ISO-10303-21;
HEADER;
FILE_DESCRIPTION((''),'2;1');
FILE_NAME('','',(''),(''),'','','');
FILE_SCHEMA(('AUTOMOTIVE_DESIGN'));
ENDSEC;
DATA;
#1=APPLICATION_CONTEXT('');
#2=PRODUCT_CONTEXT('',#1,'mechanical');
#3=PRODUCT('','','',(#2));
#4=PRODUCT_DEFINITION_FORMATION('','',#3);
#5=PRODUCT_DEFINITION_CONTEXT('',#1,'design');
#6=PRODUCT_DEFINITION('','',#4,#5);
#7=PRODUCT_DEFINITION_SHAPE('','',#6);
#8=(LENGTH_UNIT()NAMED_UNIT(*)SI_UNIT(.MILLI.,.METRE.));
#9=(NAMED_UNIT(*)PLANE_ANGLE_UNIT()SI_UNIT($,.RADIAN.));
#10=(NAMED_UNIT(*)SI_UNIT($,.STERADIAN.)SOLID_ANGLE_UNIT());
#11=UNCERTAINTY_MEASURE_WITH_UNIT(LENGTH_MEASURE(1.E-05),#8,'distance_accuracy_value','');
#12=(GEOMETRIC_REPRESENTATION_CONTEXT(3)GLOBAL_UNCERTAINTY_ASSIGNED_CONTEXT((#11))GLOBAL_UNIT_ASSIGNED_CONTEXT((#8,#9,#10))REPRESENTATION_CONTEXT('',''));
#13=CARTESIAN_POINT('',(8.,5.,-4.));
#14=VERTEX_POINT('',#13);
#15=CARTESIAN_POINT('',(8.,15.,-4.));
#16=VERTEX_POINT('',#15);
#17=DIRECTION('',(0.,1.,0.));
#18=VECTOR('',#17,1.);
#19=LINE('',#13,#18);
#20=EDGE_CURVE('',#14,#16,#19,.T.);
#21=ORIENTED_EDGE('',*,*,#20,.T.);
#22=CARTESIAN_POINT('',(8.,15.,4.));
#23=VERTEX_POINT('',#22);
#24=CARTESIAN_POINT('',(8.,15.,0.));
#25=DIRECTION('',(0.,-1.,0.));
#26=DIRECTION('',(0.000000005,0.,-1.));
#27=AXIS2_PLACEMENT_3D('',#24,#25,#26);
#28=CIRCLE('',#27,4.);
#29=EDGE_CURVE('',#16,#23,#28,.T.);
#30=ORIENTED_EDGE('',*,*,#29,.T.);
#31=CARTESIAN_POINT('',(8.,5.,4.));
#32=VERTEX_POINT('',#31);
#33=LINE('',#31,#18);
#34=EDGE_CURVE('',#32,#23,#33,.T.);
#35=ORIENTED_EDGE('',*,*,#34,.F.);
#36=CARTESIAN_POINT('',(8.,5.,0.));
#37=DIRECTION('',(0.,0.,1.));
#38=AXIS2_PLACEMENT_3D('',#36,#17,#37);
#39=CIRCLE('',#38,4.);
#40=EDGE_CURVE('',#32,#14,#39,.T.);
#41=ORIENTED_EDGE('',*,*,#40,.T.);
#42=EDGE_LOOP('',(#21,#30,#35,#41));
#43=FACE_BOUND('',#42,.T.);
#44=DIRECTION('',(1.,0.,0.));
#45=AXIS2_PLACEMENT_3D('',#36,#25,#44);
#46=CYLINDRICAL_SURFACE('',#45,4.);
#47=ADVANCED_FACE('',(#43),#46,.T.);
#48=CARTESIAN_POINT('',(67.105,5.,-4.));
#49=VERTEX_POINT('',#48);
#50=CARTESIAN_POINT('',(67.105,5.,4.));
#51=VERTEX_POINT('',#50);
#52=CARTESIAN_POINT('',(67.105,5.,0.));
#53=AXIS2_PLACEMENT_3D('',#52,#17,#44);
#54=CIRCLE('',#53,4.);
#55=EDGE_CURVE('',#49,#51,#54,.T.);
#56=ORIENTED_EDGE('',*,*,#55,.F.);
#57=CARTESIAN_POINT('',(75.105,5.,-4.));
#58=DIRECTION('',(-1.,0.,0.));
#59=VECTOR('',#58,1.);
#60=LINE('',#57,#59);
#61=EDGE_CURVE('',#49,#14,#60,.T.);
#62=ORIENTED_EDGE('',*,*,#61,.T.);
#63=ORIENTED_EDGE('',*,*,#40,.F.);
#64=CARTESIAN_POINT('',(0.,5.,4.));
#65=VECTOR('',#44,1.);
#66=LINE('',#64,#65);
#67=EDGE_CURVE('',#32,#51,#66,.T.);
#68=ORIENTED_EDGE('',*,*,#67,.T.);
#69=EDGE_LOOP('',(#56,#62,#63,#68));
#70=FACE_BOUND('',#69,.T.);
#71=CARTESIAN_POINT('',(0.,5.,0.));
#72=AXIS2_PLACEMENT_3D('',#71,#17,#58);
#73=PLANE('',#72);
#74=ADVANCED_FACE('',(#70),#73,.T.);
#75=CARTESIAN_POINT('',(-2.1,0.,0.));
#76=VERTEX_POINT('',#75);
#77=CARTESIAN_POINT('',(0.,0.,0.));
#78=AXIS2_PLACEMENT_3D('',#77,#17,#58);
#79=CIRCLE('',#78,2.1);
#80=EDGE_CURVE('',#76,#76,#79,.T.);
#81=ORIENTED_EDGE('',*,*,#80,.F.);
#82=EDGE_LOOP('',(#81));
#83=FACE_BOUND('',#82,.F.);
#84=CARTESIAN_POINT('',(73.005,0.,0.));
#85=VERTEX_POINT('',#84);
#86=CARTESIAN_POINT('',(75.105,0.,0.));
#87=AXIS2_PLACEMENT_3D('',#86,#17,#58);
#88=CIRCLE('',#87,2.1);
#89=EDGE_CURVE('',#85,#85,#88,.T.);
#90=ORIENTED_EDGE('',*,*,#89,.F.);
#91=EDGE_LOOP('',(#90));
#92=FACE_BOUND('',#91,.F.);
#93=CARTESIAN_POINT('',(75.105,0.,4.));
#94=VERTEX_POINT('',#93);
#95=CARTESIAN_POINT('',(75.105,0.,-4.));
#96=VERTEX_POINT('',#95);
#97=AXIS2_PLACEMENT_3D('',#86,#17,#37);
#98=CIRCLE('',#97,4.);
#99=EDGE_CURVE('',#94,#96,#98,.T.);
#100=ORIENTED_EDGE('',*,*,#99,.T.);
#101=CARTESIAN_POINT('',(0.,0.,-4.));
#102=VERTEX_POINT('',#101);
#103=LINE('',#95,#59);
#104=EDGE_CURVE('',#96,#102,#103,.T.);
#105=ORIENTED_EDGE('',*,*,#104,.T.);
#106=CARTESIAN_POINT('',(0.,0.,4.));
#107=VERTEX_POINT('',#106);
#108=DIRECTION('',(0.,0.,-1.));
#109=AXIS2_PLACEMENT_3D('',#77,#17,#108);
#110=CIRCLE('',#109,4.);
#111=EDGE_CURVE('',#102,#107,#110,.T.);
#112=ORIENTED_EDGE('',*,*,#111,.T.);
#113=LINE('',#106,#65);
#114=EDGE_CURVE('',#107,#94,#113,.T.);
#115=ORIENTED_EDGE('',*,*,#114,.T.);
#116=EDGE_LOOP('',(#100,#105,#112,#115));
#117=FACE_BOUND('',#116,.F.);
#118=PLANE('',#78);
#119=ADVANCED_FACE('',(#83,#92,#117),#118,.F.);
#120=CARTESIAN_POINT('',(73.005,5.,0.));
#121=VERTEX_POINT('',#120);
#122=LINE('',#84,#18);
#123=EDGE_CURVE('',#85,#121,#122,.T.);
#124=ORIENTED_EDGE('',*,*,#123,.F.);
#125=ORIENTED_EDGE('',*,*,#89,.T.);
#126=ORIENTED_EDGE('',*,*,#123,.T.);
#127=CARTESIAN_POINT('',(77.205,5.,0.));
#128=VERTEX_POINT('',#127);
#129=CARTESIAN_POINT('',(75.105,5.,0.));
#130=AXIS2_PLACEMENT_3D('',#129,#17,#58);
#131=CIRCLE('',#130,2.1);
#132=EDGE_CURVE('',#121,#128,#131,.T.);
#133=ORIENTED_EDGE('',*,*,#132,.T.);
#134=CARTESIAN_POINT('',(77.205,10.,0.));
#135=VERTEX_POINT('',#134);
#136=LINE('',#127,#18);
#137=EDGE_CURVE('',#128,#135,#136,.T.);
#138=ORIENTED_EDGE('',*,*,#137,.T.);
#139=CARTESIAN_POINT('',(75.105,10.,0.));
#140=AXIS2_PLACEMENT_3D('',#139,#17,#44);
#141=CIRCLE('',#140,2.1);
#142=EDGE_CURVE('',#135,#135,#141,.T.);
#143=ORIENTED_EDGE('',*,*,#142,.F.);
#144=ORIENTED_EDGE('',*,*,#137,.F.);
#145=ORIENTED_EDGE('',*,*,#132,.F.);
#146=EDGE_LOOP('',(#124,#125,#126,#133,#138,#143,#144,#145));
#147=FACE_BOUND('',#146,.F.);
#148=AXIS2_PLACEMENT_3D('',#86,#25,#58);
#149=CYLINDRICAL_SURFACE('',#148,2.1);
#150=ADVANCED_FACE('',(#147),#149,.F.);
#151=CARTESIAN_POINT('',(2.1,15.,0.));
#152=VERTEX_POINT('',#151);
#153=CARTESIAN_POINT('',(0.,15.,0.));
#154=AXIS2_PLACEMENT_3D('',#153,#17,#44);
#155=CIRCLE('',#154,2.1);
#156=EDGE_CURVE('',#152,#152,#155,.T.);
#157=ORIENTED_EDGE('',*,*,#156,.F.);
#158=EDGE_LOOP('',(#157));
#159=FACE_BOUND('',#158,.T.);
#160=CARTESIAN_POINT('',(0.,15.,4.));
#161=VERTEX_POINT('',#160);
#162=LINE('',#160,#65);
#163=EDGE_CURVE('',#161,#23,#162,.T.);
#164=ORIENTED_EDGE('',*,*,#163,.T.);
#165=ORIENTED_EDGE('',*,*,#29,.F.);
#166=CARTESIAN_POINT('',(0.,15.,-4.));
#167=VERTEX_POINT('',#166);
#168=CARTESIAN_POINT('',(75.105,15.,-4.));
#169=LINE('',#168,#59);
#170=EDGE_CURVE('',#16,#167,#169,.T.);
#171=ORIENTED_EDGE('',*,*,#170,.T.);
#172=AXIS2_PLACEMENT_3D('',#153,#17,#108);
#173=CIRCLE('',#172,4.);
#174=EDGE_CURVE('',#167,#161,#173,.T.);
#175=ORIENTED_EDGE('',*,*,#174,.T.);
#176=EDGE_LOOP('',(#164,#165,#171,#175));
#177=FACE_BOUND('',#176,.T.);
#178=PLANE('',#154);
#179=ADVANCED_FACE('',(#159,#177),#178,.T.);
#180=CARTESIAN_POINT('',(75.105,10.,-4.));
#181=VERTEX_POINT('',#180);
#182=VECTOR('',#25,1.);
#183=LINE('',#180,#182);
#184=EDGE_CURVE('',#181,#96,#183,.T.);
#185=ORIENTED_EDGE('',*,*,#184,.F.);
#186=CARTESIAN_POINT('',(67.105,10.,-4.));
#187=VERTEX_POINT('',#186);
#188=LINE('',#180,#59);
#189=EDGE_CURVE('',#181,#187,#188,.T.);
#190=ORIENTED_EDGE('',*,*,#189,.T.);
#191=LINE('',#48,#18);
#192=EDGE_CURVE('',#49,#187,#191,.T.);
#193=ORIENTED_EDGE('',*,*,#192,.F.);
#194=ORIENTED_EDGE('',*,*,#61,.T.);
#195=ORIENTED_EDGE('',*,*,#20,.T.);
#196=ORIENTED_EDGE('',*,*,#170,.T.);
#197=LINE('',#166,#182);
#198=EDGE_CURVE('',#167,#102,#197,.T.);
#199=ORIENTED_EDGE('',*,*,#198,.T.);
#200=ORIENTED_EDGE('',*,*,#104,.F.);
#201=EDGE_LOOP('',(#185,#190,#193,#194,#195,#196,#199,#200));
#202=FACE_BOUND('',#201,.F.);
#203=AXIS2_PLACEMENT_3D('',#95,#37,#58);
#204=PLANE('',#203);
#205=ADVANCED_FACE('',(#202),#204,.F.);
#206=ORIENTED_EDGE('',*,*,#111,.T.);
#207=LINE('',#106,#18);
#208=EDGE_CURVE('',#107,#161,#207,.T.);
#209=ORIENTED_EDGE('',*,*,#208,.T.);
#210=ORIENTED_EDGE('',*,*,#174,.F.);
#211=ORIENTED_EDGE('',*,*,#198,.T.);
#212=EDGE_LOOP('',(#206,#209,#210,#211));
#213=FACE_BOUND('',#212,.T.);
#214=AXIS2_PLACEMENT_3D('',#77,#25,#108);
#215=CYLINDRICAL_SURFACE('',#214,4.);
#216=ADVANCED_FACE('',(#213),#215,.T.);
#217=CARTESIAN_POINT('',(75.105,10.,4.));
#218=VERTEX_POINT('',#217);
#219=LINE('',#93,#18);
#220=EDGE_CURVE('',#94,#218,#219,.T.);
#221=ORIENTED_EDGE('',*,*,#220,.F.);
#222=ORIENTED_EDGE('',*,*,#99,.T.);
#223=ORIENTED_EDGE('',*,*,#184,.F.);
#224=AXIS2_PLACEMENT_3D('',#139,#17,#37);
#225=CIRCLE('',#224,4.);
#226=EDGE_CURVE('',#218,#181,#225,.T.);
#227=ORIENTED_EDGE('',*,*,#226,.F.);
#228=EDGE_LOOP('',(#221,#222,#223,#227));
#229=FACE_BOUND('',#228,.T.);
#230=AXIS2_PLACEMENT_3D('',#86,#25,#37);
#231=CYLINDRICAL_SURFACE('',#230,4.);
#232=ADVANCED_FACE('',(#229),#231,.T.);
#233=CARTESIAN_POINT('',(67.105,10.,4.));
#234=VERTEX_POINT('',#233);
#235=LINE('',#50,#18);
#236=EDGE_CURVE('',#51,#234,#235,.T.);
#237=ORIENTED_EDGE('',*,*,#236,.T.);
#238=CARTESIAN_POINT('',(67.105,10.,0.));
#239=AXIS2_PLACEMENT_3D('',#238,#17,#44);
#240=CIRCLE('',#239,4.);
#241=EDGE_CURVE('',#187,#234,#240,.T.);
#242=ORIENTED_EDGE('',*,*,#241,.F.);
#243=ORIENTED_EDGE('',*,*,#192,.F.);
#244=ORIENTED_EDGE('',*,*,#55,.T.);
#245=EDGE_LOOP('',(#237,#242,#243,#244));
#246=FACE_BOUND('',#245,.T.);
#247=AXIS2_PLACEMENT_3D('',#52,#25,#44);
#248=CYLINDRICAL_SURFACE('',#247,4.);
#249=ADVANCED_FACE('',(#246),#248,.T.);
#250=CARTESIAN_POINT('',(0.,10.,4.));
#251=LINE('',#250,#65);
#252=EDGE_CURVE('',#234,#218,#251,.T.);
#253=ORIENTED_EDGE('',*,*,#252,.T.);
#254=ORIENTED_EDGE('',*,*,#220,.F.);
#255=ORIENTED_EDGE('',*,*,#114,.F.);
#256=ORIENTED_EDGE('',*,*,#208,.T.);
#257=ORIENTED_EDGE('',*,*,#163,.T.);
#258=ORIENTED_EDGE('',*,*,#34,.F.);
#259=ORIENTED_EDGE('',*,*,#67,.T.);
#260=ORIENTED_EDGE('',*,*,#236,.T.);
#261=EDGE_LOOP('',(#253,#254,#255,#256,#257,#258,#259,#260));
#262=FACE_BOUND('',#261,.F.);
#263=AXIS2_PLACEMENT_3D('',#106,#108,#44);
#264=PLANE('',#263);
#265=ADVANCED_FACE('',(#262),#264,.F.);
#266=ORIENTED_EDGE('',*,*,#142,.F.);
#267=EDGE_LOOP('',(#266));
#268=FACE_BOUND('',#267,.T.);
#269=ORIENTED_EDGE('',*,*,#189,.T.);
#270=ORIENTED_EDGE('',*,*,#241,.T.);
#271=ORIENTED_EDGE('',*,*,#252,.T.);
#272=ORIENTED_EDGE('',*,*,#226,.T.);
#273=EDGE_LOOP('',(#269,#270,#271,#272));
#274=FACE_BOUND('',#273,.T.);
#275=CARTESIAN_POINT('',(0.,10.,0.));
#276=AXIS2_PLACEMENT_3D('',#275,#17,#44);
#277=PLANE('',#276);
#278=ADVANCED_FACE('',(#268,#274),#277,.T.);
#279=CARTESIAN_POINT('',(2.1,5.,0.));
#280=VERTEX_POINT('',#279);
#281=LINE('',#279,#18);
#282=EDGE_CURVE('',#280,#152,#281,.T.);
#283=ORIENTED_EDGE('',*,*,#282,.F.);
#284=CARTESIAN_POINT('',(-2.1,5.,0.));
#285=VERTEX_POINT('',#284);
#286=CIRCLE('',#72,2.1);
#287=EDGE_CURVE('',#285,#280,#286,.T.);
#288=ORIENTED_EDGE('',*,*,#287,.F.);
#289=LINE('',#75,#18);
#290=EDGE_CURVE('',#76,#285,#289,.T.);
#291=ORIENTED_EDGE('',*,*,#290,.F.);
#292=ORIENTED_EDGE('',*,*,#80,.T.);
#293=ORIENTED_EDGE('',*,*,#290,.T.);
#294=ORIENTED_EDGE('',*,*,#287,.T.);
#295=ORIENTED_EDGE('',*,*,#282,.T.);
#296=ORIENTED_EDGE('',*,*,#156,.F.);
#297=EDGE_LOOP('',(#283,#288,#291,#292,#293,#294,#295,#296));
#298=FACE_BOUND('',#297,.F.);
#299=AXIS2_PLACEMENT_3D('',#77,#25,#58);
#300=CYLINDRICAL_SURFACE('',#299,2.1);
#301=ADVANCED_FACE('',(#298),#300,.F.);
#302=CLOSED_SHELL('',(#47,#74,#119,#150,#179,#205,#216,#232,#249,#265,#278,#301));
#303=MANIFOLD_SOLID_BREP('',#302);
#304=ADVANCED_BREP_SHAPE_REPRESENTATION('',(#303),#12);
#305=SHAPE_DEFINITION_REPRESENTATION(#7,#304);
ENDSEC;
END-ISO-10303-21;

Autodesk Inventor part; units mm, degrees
ref_plane "YZ Plane" through (0, 0, 0) normal (1, 0, 0) x (0, 1, 0)
ref_plane "XZ Plane" through (0, 0, 0) normal (0, 1, 0) x (-1, 0, 0)
ref_plane "XY Plane" through (0, 0, 0) normal (0, 0, 1) x (1, 0, 0)
sketch "Sketch1" plane through (0, 0, 0) normal (0, 1, 0) x (-1, 0, 0)
  line L0 (0, 0) -> (-75.105, 0) construction
  line L1 (0, 4) -> (-75.105, 4)
  line L2 (-75.105, -4) -> (0, -4)
  arc A0 (0, -4) -> (0, 4) centre (0, 0) ccw
  arc A1 (-75.105, 4) -> (-75.105, -4) centre (-75.105, 0) ccw
  circle A2 centre (0, 0) radius 2.1
  circle A3 centre (-75.105, 0) radius 2.1
  point P0 (-37.5525, 0)
  dimension "d0" = 75.105
  dimension "d1" = 8
  dimension "d2" = 4.2
  dimension "d10" = 4.2
extrude "Extrusion1" add sketch "Sketch1" along normal blind 5
sketch "Sketch4" plane through (0, 5, 0) normal (0, 1, 0) x (1, 0, 0)
  circle A0 centre (8, 0) radius 4
  circle A1 centre (67.105, 0) radius 4
  arc A2 (75.105, -4) -> (75.105, 4) centre (75.105, 0) ccw projected
  line L0 (75.105, 4) -> (0, 4) projected
  arc A3 (0, 4) -> (0, -4) centre (0, 0) ccw projected
  line L1 (0, -4) -> (75.105, -4) projected
  circle A4 centre (75.105, 0) radius 2.1 projected
  circle A5 centre (0, 0) radius 2.1 projected
  point P0 (8, -4)
  point P1 (8, 4)
  point P2 (67.105, 4)
  point P3 (67.105, -4)
  dimension "d30" = 8
  dimension "d31" = 8
  dimension "d32" = 8
  dimension "d33" = 8
extrude "Extrusion7" add sketch "Sketch4" along normal blind 10 contours A0 | A0 L1 A3 L0
extrude "Extrusion8" add sketch "Sketch4" along normal blind 5 contours L0 A2 L1 A1 | A1
